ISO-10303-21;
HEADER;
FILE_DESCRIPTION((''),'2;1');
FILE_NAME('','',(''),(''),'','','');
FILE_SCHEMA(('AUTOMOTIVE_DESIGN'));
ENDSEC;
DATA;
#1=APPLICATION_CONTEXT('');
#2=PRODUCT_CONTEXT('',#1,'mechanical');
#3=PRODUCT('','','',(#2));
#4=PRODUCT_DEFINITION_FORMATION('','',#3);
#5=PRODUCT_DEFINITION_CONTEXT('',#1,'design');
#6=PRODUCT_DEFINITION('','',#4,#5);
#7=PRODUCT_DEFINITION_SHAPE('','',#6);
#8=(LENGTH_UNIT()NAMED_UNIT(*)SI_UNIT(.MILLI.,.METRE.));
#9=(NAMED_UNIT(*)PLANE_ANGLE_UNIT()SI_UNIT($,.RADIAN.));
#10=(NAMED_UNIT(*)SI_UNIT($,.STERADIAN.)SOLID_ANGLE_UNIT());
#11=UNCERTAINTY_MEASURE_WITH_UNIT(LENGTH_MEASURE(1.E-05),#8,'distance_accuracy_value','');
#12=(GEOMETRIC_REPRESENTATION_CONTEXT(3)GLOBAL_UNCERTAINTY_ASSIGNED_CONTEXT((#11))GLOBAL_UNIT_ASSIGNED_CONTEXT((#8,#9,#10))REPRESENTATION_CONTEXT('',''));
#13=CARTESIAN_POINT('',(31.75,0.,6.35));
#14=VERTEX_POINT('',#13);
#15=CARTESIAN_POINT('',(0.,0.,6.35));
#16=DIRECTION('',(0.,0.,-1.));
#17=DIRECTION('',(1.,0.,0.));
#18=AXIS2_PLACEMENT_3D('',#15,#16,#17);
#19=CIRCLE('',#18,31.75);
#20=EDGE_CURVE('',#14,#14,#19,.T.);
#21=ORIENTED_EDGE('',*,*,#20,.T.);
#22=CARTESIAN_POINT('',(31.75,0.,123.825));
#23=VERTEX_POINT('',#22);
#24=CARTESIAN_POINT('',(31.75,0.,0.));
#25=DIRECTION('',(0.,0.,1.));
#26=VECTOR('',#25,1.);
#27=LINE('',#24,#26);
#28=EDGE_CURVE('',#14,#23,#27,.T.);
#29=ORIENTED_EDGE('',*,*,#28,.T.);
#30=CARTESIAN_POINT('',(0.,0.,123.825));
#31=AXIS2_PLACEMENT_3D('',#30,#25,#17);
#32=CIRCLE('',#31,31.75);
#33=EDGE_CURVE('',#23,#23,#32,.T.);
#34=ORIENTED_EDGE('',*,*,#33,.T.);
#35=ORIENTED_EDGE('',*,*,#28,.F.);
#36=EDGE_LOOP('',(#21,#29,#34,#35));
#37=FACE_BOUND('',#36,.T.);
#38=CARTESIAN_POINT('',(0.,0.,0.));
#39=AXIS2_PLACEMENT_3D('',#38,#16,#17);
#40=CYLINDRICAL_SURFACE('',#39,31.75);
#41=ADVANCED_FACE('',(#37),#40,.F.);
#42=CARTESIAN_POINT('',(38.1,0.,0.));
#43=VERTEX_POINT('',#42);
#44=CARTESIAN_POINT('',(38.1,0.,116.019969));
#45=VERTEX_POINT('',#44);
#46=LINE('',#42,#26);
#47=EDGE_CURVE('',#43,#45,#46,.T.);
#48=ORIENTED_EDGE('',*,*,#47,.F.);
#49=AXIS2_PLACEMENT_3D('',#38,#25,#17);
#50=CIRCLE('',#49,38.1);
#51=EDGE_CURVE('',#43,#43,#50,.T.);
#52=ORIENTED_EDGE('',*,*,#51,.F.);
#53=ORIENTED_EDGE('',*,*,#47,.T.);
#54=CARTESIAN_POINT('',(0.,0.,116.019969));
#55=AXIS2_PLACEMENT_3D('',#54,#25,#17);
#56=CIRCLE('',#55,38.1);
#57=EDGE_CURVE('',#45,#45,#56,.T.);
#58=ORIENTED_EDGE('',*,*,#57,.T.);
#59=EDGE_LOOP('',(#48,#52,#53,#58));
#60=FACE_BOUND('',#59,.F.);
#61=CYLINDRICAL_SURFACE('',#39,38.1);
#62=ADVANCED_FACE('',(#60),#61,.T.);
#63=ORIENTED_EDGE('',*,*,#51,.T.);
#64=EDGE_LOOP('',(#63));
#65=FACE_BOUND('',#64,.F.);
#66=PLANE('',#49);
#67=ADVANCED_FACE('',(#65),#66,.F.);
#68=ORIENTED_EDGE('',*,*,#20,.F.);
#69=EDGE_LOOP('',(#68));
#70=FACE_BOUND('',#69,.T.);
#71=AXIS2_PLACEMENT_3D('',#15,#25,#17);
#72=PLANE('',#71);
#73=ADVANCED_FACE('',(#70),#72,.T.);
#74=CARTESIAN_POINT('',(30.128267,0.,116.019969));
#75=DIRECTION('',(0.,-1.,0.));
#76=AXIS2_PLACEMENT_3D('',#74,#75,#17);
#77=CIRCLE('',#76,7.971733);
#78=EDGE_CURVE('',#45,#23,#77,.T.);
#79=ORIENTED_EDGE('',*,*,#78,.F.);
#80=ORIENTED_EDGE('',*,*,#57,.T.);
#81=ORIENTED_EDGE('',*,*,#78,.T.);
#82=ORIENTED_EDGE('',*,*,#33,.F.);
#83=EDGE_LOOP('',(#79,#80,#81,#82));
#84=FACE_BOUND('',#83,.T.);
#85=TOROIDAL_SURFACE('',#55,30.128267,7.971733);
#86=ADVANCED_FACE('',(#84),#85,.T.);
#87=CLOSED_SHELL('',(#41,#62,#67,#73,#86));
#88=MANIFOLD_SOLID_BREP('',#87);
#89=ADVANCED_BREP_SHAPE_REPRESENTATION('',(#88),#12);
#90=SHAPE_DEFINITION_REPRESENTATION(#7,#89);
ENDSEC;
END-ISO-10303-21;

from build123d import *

# Parameters (mm, degrees)
F0_R     = 38.1
F1_DEPTH = 123.825
F2_T     = -6.35


# Not quite as in the source:
# - a fillet or chamfer that OpenCascade refuses, or shapes differently, is made with other operations: its cross-section is extruded or revolved along the edge and cut away or added


with BuildPart() as f1:
    # F0 (on Top) → F1 (new body)
    with BuildSketch(Plane.XY):
        Circle(F0_R)
    extrude(amount=F1_DEPTH)

    # F2
    f2_openings = [f1.faces().sort_by_distance(p)[0] for p in [
        (0, 0, 123.825),
    ]]
    offset(amount=F2_T, openings=f2_openings)

    # F3: fillet of radius 7.971733183 on 1 edges, made by hand

    # F3_s1 → F3_t2 (revolve, cut)
    with BuildSketch(Plane.XZ):
        with BuildLine():
            ThreePointArc((38.1, 116.019968839), (36.3119774413, 121.0508984605), (31.75, 123.825))
            Line((31.75, 123.825), (38.1, 123.825))
            Line((38.1, 123.825), (38.1, 116.019968839))
        make_face()
    revolve(axis=Axis((0, 0, 123.825), (0, 0, 1)), mode=Mode.SUBTRACT)


solid = f1.part
